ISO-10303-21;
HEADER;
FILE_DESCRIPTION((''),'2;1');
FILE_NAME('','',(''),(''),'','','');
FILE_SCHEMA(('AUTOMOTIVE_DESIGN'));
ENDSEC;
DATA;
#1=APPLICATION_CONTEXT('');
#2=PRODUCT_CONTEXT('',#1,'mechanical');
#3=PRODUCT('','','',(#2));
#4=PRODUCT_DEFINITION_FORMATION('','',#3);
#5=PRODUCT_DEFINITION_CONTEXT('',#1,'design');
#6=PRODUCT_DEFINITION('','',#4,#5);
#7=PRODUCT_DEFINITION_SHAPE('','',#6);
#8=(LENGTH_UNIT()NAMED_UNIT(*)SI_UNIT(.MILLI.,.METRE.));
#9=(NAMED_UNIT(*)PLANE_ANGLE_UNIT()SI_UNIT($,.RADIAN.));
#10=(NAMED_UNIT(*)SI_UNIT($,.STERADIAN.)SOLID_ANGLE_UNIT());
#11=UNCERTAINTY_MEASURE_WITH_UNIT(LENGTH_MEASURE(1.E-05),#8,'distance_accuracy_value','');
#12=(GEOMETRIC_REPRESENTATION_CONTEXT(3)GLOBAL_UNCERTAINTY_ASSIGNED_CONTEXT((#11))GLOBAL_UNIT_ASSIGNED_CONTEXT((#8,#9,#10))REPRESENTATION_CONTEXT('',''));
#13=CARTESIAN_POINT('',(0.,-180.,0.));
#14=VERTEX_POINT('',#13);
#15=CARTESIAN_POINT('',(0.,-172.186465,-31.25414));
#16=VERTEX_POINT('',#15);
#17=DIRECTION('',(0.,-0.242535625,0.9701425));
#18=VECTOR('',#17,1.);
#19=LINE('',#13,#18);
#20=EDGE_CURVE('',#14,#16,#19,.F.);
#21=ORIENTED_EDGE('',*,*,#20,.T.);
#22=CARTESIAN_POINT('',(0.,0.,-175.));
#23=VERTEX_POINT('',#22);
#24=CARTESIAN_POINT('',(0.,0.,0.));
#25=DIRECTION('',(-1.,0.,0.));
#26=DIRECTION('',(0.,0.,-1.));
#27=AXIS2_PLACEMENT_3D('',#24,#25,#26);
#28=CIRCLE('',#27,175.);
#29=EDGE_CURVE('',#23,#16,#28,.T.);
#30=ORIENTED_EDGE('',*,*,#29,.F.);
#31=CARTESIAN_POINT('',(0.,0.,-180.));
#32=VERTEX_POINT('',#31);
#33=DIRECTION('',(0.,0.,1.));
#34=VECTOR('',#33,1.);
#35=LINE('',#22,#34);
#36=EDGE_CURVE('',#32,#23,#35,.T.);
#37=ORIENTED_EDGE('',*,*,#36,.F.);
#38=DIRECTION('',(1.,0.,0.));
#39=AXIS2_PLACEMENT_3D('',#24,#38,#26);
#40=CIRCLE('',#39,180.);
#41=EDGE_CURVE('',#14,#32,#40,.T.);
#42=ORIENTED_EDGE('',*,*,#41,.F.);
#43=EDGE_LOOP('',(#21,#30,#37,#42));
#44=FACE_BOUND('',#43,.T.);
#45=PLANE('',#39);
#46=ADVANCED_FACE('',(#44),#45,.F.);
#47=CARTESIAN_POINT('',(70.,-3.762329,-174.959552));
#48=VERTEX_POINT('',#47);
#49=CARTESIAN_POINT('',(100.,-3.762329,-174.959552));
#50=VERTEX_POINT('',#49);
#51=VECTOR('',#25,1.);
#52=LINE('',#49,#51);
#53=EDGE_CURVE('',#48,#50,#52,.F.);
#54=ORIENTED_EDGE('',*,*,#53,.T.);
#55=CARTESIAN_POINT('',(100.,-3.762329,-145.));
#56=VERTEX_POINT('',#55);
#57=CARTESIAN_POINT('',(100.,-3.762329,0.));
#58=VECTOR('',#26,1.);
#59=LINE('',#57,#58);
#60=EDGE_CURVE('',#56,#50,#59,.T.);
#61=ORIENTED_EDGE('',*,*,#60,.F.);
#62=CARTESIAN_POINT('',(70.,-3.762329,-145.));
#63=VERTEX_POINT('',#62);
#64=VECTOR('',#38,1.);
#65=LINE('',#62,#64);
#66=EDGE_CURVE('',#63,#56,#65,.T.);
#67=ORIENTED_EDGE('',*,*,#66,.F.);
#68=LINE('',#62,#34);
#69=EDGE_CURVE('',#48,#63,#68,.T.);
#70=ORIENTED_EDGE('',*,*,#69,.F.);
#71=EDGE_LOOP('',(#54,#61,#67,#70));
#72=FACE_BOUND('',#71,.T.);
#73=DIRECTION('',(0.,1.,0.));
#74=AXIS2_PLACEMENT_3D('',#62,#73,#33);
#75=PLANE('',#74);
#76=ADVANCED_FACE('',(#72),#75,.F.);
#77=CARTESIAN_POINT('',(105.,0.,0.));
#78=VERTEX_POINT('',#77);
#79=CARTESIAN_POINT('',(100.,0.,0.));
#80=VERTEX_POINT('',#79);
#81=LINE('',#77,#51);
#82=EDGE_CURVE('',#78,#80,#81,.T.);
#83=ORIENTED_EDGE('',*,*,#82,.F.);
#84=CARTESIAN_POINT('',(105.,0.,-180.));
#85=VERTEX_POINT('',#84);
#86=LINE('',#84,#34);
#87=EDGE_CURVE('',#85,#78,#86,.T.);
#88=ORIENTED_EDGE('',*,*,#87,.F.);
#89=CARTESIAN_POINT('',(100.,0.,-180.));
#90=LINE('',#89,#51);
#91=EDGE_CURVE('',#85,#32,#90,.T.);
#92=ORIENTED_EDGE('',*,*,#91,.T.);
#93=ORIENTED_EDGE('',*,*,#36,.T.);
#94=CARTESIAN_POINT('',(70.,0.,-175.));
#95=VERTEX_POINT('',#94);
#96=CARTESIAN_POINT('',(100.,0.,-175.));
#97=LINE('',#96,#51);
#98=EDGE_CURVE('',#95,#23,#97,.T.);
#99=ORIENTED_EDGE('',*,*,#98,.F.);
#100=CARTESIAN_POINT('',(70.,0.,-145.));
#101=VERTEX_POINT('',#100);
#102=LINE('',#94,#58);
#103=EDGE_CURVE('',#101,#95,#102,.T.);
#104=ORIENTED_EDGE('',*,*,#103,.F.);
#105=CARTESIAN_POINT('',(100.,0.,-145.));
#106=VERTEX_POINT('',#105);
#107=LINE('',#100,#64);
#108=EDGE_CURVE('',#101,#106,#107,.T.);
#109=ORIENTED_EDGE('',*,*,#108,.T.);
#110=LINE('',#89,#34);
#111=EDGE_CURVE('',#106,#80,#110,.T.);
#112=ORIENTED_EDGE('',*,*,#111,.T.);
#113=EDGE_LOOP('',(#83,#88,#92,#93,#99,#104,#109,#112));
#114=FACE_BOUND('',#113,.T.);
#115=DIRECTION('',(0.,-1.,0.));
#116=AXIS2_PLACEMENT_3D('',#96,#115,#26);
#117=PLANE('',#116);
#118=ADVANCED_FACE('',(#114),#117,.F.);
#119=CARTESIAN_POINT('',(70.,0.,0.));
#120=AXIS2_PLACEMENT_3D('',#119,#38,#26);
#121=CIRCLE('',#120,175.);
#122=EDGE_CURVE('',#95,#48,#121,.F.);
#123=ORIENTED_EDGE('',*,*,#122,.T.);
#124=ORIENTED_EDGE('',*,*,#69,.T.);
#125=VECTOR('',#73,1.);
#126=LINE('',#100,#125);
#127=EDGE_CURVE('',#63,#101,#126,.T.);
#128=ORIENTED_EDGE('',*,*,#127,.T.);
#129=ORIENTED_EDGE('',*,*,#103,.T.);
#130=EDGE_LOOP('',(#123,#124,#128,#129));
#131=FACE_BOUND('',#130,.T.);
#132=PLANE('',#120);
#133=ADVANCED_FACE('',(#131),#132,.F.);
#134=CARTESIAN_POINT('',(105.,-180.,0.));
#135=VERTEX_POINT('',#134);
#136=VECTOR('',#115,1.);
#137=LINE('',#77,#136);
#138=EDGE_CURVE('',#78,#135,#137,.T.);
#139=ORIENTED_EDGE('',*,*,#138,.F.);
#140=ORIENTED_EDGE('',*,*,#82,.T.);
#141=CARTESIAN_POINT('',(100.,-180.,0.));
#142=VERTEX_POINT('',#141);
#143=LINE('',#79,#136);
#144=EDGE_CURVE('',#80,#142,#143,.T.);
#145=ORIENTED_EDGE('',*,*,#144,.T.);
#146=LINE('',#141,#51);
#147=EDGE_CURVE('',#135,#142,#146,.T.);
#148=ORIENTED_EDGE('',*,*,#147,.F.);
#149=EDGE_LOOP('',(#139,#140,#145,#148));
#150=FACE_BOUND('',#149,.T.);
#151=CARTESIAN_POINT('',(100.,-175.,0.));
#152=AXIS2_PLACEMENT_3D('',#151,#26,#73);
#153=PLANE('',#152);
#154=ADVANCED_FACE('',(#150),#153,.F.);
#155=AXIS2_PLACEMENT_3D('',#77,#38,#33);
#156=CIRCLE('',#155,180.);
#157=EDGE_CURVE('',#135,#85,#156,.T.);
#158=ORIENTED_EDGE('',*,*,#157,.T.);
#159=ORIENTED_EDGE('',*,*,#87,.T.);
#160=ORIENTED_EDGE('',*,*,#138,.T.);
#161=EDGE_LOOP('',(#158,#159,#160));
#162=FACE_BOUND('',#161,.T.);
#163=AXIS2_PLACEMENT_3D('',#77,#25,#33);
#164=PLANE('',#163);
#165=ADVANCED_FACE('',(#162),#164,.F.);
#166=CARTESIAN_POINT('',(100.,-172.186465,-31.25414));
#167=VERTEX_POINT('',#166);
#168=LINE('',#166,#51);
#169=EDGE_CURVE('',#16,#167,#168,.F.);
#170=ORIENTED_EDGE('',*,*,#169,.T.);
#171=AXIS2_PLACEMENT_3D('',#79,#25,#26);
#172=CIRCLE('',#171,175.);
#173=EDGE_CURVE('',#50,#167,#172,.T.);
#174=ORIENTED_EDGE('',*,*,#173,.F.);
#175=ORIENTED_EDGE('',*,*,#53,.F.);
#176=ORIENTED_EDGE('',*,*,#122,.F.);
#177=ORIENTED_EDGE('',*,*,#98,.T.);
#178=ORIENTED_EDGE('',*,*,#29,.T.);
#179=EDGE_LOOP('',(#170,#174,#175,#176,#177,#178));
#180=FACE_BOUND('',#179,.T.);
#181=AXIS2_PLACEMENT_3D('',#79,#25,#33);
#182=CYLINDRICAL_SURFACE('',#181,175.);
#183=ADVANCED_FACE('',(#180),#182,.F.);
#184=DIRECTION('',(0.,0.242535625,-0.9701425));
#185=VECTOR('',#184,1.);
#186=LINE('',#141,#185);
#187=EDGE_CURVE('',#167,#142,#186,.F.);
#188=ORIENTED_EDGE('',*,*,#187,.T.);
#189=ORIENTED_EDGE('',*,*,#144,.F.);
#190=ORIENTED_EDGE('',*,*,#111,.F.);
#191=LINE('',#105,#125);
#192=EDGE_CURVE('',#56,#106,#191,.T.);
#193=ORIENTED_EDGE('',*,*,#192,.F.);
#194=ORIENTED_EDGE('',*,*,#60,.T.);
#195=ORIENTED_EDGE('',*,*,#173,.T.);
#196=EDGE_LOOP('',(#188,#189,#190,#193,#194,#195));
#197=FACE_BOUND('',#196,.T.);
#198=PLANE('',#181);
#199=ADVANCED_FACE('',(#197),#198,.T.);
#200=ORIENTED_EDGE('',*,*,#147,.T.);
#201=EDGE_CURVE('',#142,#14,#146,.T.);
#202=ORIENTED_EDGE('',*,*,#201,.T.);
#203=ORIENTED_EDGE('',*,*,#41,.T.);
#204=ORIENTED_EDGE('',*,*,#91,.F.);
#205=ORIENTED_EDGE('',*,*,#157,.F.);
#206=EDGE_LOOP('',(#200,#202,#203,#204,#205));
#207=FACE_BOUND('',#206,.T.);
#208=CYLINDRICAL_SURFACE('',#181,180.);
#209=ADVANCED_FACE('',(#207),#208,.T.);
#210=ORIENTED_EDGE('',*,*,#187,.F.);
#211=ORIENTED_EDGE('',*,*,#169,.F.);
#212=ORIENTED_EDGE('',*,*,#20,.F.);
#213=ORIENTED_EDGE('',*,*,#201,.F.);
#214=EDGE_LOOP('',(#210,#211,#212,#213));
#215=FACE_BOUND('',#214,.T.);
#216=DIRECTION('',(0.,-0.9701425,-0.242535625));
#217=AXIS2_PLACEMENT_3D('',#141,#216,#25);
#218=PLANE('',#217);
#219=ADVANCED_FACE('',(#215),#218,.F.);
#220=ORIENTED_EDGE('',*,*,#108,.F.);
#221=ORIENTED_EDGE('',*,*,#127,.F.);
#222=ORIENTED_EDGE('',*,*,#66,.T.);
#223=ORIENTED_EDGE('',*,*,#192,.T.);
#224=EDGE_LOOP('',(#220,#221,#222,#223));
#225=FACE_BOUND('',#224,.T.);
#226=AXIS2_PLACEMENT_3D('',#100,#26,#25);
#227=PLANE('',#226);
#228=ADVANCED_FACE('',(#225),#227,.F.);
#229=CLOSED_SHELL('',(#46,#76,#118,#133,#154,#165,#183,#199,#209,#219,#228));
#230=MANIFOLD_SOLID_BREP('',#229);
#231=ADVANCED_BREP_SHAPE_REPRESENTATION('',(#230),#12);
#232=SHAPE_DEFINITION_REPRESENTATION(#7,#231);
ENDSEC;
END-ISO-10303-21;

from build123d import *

# Parameters (mm, degrees)
BOSS_EXTRUDE1_DEPTH = 100
BOSS_EXTRUDE2_DEPTH = 5
CHAMFER1_SIZE       = 5
SKETCH4_W           = 30
SKETCH4_H           = 3.762328583
BOSS_EXTRUDE3_DEPTH = 30


with BuildPart() as part:
    # Sketch2 → Boss-Extrude1 (new body)
    with BuildSketch(Plane(origin=(0, 0, 0), x_dir=(0, 0, -1), z_dir=(1, 0, 0))):
        with BuildLine():
            Line((175, 0), (180, 0))
            ThreePointArc((180, 0), (127.279220614, -127.279220614), (0, -180))
            Line((0, -180), (0, -175))
            ThreePointArc((0, -175), (123.743686708, -123.743686708), (175, 0))
        make_face()
    extrude(amount=BOSS_EXTRUDE1_DEPTH)

    # Sketch3 → Boss-Extrude2 (add)
    with BuildSketch(Plane(origin=(100, 0, 0), x_dir=(0, 0, -1), z_dir=(1, 0, 0))):
        with BuildLine():
            Line((0, 0), (0, -180))
            ThreePointArc((0, -180), (127.279220614, -127.279220614), (180, 0))
            Line((180, 0), (0, 0))
        make_face()
    extrude(amount=BOSS_EXTRUDE2_DEPTH)

    # Chamfer1
    # the kernel refuses this chamfer: 20, 5 mm, written as the material it takes off along each edge
    with BuildSketch(Plane(origin=(-80.427863616, -175, 0), x_dir=(0, -1, 0), z_dir=(1, 0, 0))) as chamfer1_piece_1:
        with BuildLine():
            Line((CHAMFER1_SIZE, 0), (-2.813534961, 31.254139845))
            ThreePointArc((-2.813534961, 31.254139845), (-0.740839573, 16.085552754), (0, 0))
            Line((0, 0), (CHAMFER1_SIZE, 0))
        make_face()
    extrude(amount=180.427863616, mode=Mode.SUBTRACT)

    # Sketch4 → Boss-Extrude3 (add)
    with BuildSketch(Plane.ZY.offset(-100)):
        with Locations((-160, -1.881164292)):
            Rectangle(SKETCH4_W, SKETCH4_H)
    extrude(amount=BOSS_EXTRUDE3_DEPTH)


solid = part.part
